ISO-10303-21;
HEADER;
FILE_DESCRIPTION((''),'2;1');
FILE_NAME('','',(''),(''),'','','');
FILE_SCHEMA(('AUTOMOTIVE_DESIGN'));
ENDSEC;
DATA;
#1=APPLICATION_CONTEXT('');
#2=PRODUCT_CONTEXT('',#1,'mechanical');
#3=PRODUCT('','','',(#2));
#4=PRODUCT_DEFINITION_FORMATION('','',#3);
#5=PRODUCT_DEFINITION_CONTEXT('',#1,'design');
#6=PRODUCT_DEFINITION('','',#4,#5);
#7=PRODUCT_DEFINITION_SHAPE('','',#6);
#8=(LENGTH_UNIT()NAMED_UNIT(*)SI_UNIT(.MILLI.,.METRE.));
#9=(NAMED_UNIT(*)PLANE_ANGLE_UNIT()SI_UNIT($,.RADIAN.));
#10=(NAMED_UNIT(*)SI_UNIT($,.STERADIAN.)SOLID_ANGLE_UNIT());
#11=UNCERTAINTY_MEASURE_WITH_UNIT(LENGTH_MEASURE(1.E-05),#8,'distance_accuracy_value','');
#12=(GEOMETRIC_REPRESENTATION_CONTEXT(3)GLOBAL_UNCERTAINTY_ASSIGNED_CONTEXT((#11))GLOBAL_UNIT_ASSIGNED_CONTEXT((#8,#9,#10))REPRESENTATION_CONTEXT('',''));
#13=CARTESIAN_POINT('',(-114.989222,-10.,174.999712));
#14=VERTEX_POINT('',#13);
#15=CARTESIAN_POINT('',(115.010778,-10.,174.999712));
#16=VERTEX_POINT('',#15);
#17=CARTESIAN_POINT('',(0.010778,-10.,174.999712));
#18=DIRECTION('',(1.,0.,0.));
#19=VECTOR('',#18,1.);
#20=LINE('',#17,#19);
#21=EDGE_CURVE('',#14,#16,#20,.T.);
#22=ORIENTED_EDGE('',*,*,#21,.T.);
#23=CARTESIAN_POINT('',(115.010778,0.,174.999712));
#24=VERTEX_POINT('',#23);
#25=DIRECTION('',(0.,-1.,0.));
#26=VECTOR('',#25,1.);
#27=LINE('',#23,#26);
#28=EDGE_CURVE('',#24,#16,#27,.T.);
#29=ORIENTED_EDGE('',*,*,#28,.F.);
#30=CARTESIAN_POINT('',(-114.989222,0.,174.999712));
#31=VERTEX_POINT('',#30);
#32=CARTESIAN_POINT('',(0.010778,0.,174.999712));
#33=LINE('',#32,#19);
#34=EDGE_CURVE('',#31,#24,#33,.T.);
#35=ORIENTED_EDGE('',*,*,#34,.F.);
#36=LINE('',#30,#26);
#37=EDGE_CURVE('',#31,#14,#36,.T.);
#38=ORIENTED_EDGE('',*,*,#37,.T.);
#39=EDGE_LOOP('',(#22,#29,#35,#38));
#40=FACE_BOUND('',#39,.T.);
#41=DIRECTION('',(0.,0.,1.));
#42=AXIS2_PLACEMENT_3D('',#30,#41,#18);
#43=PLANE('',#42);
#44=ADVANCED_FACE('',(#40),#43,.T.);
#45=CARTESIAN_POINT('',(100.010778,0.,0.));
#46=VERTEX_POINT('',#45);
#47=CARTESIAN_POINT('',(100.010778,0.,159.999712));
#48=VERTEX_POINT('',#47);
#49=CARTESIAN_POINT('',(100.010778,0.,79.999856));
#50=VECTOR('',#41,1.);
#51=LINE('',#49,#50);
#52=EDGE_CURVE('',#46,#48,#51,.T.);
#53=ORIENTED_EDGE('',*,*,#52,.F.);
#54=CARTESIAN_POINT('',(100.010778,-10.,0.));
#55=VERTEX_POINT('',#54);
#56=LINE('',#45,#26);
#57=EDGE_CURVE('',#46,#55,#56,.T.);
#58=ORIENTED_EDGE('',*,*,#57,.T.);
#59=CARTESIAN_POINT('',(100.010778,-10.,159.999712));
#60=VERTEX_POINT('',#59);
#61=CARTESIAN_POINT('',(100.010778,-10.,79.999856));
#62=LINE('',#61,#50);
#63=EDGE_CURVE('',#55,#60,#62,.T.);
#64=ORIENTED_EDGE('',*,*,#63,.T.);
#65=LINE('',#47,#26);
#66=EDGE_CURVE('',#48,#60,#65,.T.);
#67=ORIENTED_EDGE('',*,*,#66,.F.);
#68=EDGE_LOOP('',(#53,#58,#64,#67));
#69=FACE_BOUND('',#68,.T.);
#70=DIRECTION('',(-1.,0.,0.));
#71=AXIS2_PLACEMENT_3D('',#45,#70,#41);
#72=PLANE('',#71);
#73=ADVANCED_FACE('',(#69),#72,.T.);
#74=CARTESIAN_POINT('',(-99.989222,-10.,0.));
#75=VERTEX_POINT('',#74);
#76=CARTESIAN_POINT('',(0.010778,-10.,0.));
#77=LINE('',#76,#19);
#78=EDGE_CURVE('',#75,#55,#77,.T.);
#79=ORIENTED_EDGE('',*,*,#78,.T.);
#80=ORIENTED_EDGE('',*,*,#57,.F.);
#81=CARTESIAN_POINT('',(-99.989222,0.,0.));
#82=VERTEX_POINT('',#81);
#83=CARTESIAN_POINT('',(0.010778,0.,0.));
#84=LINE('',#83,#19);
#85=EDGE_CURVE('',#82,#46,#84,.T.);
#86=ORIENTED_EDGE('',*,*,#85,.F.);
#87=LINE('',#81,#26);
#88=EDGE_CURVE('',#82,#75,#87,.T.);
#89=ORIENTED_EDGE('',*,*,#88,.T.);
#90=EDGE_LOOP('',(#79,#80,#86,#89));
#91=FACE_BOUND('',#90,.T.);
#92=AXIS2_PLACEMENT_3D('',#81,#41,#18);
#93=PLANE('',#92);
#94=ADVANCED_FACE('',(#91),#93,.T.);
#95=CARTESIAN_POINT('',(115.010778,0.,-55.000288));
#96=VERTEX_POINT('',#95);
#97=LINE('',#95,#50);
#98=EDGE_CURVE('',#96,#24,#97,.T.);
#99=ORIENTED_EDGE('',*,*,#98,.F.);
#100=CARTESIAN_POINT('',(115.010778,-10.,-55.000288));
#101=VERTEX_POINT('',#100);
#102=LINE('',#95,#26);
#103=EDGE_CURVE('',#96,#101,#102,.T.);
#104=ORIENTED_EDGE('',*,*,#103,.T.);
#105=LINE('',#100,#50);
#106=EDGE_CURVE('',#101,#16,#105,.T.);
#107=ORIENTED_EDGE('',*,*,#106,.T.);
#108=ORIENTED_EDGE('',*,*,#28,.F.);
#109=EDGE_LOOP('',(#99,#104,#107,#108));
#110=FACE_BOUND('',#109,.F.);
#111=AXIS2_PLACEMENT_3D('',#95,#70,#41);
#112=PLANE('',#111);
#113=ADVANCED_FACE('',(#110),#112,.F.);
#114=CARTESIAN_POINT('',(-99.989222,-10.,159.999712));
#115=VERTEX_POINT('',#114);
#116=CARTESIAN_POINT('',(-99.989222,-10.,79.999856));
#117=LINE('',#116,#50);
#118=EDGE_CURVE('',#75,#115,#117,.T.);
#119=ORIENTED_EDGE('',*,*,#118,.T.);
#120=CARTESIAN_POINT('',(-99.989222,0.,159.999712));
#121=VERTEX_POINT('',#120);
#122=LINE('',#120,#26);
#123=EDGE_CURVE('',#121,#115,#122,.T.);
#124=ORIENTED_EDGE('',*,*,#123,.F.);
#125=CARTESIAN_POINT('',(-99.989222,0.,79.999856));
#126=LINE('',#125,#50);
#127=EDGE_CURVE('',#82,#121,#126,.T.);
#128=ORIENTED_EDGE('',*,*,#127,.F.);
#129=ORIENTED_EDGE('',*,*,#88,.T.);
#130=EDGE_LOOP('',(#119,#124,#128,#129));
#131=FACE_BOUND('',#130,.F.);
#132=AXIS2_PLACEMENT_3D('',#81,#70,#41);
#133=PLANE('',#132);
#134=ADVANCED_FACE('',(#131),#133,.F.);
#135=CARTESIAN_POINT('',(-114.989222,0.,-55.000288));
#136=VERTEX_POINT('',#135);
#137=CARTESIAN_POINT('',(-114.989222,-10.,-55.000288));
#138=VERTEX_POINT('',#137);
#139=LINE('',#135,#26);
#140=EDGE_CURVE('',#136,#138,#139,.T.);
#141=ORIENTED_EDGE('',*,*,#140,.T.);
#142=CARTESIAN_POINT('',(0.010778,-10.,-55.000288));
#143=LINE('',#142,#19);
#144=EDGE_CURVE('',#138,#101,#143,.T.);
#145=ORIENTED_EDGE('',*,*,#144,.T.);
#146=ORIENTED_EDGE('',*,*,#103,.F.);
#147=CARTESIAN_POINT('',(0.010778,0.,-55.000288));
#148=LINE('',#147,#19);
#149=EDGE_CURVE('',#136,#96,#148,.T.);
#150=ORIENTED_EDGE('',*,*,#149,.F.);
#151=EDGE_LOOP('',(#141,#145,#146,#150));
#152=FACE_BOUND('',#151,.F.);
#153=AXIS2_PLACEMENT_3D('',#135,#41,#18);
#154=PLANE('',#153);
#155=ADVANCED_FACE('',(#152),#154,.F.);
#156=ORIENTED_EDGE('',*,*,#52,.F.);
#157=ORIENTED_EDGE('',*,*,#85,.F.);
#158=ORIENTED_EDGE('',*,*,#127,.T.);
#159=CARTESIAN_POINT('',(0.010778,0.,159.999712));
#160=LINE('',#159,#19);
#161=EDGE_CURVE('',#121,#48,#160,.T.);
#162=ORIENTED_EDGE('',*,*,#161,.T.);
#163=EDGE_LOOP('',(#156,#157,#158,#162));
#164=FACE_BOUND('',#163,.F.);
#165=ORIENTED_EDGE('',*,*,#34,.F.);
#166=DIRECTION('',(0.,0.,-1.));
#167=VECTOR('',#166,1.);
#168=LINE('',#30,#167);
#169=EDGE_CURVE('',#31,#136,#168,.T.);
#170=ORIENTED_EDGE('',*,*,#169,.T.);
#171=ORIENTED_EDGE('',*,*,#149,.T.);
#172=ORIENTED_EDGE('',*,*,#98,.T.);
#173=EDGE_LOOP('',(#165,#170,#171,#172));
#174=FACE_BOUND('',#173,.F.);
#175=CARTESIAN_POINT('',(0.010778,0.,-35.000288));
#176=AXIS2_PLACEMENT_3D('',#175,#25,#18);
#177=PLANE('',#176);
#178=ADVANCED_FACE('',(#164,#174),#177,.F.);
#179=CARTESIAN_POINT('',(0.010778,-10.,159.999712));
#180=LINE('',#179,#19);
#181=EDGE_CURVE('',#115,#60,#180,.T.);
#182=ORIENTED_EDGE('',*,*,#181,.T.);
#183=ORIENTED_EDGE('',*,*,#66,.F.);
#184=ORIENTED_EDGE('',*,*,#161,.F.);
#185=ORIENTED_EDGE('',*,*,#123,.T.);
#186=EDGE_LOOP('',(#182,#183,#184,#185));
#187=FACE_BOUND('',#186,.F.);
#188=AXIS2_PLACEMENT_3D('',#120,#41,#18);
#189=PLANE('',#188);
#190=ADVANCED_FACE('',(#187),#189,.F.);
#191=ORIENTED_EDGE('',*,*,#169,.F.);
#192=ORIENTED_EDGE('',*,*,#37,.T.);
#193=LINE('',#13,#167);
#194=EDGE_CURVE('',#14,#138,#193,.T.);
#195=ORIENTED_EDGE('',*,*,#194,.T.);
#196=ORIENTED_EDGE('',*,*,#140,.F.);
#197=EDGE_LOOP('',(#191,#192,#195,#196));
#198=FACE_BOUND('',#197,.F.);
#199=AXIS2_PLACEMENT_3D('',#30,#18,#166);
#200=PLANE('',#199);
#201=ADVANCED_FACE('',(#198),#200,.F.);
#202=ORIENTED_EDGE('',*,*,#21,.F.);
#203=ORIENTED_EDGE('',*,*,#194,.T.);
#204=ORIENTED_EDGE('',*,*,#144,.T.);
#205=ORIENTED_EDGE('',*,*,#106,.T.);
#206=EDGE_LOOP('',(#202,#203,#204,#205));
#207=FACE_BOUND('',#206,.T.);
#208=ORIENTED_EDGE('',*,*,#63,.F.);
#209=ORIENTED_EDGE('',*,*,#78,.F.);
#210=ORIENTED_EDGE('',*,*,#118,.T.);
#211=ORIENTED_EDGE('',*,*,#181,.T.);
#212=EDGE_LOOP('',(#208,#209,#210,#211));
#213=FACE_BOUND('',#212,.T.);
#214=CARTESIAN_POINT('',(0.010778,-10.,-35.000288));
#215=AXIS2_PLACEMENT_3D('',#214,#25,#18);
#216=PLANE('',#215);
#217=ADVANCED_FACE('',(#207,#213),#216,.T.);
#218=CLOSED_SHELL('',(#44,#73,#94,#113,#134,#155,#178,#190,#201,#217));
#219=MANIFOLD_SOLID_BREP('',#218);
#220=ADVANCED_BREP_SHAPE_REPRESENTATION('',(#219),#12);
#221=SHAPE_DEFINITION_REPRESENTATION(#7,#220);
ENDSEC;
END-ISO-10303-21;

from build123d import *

# Parameters (mm, degrees)
F0_W     = 230
F0_H     = 40
F0_H_2   = 190
F0_W_2   = 200
F0_H_3   = 159.9997122972
F1_DEPTH = 10


# Not quite as in the source:
# - a feature names something its author has since deleted; it is built from what else it names


with BuildPart() as f1:
    # F0 (on Front) → F1 (new body)
    with BuildSketch(Plane.XZ):
        with Locations((0.0107780099, -35.0002877028)):
            Rectangle(F0_W, F0_H)
        with Locations((0.0107780099, 79.9997122972)):
            Rectangle(F0_W, F0_H_2)
        with Locations((0.0107780099, 79.9998561486)):
            Rectangle(F0_W_2, F0_H_3, mode=Mode.SUBTRACT)
    extrude(amount=F1_DEPTH)


solid = f1.part
